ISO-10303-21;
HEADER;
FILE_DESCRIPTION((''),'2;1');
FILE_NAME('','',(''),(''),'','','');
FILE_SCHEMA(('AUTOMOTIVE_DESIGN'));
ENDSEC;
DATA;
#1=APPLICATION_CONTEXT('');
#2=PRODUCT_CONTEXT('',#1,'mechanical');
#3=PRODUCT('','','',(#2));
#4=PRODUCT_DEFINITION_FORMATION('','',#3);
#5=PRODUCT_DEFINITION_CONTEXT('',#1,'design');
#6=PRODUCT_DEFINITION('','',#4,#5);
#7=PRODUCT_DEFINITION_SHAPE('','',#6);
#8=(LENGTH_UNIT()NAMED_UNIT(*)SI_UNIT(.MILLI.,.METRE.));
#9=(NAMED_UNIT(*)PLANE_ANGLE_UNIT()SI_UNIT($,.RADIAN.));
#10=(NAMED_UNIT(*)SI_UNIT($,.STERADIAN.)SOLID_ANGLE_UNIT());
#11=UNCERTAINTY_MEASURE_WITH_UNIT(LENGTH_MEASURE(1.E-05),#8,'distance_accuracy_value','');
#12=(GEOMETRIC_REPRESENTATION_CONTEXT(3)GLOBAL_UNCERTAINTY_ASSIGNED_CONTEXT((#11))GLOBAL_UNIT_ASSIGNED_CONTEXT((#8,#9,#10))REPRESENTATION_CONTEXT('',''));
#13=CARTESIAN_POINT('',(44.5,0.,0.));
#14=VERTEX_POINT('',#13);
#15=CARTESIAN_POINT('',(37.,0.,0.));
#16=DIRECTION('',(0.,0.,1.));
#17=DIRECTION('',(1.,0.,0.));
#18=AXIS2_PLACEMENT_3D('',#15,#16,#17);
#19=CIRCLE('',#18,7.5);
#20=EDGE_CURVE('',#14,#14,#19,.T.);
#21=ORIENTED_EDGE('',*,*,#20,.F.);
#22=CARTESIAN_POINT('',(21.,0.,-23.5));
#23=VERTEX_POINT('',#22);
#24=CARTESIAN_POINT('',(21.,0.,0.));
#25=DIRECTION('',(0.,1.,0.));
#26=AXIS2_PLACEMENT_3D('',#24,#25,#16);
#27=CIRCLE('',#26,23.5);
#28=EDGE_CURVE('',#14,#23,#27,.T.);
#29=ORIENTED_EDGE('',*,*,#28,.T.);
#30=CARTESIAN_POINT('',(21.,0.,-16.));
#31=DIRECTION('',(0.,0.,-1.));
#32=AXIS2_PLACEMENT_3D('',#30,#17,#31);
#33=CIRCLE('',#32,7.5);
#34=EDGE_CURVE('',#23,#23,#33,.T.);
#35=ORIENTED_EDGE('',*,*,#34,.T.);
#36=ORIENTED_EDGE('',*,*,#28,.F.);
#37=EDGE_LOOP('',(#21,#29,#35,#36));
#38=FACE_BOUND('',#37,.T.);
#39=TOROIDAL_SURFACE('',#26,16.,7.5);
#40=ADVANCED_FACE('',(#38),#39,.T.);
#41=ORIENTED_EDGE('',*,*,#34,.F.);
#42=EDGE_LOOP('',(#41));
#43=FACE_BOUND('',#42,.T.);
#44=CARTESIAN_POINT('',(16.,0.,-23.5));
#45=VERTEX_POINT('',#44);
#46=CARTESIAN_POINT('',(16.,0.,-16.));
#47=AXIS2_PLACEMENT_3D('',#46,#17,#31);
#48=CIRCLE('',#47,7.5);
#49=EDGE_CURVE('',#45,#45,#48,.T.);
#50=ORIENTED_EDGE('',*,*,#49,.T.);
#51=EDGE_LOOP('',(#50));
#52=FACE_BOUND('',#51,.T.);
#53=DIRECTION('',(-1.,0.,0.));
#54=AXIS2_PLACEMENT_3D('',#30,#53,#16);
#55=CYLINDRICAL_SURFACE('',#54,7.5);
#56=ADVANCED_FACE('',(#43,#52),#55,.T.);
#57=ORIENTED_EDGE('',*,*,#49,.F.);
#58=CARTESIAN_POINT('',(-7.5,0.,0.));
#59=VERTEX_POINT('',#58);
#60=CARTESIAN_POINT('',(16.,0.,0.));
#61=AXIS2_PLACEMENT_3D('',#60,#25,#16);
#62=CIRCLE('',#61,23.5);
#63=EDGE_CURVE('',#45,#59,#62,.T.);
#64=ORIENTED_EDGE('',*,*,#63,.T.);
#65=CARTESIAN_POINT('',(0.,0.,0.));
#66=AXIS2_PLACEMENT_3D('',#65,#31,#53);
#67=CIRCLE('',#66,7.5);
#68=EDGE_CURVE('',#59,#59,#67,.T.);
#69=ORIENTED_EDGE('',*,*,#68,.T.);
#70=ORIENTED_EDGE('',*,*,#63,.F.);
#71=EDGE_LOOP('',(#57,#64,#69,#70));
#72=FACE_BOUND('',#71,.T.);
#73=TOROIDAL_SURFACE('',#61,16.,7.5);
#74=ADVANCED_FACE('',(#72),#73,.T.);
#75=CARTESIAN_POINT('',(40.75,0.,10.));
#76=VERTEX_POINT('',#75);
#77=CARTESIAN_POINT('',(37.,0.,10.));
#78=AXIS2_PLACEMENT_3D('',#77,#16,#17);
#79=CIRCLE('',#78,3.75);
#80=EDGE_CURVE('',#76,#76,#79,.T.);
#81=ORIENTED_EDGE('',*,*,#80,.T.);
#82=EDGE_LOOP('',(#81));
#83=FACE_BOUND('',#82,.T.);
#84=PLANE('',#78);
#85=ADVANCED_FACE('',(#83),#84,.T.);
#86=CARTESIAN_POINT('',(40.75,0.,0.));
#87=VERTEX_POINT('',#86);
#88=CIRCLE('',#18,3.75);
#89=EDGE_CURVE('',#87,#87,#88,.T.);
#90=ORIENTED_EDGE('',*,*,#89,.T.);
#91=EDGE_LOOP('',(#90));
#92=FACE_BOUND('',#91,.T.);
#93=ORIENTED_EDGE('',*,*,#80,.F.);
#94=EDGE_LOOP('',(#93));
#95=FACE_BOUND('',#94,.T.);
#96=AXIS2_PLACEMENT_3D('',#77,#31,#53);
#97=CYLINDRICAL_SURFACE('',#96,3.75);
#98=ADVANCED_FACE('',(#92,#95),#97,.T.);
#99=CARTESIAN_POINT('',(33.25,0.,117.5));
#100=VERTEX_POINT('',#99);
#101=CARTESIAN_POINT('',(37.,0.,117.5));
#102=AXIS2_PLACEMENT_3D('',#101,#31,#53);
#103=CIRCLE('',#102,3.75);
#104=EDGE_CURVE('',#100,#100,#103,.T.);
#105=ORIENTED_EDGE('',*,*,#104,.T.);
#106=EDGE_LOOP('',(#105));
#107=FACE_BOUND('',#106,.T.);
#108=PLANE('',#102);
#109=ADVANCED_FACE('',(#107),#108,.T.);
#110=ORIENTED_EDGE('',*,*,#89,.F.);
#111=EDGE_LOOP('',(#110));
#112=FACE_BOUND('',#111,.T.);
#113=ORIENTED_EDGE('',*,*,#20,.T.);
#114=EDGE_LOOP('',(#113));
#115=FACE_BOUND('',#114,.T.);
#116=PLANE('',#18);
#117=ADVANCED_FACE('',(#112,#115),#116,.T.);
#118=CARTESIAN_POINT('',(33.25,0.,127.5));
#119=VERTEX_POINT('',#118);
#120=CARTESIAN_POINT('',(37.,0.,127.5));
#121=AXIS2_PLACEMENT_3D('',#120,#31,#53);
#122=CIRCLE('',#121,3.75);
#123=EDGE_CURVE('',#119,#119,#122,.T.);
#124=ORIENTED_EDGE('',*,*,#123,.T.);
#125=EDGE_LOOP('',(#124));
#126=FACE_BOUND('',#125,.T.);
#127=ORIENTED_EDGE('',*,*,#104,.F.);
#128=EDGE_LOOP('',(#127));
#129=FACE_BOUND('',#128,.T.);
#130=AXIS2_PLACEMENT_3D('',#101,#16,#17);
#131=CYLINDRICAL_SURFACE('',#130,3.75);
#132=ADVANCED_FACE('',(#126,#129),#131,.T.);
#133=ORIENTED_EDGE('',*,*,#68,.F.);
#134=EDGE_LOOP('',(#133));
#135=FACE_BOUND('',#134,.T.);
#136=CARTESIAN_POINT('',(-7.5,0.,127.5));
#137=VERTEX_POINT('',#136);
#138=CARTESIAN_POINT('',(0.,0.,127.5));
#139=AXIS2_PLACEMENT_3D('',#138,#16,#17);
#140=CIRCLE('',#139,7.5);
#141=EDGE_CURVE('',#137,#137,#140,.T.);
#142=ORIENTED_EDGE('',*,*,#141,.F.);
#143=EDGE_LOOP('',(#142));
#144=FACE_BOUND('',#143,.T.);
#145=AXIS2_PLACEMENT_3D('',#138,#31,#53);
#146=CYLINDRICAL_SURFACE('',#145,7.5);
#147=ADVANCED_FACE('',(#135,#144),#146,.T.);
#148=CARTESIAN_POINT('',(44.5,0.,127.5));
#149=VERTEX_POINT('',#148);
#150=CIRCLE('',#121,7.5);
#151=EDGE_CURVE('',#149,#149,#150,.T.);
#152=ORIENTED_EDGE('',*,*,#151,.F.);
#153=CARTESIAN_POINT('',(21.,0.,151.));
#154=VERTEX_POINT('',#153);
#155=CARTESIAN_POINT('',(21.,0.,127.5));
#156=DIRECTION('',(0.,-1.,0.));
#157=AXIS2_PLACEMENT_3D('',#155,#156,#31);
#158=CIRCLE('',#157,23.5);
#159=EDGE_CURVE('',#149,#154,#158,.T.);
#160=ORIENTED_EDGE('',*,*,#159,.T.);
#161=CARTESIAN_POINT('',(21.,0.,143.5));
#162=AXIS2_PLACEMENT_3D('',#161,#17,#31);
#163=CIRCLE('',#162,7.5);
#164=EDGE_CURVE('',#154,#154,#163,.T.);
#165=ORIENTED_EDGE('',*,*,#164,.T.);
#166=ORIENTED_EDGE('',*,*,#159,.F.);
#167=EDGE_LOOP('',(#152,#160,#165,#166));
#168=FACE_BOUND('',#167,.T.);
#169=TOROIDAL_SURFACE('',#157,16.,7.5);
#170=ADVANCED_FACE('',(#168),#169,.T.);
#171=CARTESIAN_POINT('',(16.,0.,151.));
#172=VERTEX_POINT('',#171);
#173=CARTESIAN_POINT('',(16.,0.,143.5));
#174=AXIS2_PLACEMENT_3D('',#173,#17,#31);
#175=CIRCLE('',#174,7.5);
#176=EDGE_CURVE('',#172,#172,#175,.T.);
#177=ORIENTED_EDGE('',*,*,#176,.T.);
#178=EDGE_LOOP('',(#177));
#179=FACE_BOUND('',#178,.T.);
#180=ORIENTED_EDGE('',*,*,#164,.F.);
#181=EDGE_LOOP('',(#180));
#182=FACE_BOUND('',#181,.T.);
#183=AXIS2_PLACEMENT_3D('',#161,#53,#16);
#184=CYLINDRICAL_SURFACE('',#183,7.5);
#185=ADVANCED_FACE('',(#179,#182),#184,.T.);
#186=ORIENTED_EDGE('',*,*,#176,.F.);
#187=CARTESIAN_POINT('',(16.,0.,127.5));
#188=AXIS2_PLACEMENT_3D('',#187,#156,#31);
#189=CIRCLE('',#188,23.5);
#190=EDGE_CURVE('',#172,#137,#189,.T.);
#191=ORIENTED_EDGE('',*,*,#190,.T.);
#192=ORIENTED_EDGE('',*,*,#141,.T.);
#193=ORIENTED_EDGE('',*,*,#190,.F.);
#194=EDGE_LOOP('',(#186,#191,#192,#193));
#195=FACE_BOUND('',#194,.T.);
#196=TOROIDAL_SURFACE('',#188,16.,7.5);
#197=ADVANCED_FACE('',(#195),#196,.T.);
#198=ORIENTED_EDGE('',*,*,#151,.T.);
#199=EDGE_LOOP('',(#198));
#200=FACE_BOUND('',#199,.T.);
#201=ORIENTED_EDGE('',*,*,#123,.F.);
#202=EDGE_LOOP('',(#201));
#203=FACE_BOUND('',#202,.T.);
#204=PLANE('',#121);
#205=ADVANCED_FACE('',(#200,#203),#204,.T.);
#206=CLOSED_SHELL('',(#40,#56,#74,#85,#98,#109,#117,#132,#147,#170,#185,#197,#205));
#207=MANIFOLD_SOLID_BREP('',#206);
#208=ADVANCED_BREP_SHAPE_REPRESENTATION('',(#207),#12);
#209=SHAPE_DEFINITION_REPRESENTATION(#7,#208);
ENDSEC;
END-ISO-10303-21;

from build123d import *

# Parameters (mm, degrees)
SKETCH_2_R          = 7.5
EXTRUDE_1_DEPTH     = 127.5
SKETCH_3_R          = 7.5
REVOLVE_1_ANGLE     = 90
REVOLVE_2_OUTLINE_R = 7.5
REVOLVE_2_ANGLE     = 90
SKETCH_19_R         = 7.5
EXTRUDE_2_DEPTH     = 5
SKETCH_21_R         = 7.5
EXTRUDE_3_DEPTH     = 5
SKETCH_22_R         = 7.5
REVOLVE_3_ANGLE     = 90
SKETCH_23_R         = 7.5
REVOLVE_4_ANGLE     = 90
SKETCH_25_R         = 3.75
EXTRUDE_4_DEPTH     = 10
EXTRUDE_START       = 10
SKETCH_26_R         = 3.75
EXTRUDE_5_DEPTH     = 10


# Read off the part's stored shape, not the designer's step: Повернуть2
with BuildPart() as part:
    # Эскиз2 → Бобышка-Вытянуть1 (new body)
    with BuildSketch(Plane.XY):
        Circle(SKETCH_2_R)
    extrude(amount=EXTRUDE_1_DEPTH)

    # Эскиз3 → Повернуть1 (revolve)
    with BuildSketch(Plane.XY.offset(127.5)):
        with Locations(Location((0, 0, 0), (0, 0, 180))):
            Circle(SKETCH_3_R)
    revolve(axis=Axis((16, 0, 127.5), (0, 1, 0)), revolution_arc=REVOLVE_1_ANGLE)

    # Повернуть2 outline → Повернуть2 (revolve)
    with BuildSketch(Plane(origin=(16, 0, 0), x_dir=(0, 0, -1), z_dir=(1, 0, 0))):
        with Locations((16, 0)):
            Circle(REVOLVE_2_OUTLINE_R)
    revolve(axis=Axis((16, 0, 0), (0, 1, 0)), revolution_arc=REVOLVE_2_ANGLE)

    # Эскиз19 → Бобышка-Вытянуть2 (add)
    with BuildSketch(Plane(origin=(16, 0, 0), x_dir=(0, 0, -1), z_dir=(1, 0, 0))):
        with Locations((16, 0)):
            Circle(SKETCH_19_R)
    extrude(amount=EXTRUDE_2_DEPTH)

    # Эскиз21 → Бобышка-Вытянуть3 (add)
    with BuildSketch(Plane(origin=(16, 0, 0), x_dir=(0, 0, -1), z_dir=(1, 0, 0))):
        with Locations(Location((-143.5, 0, 0), (0, 0, 180))):
            Circle(SKETCH_21_R)
    extrude(amount=EXTRUDE_3_DEPTH)

    # Эскиз22 → Повернуть3 (revolve)
    with BuildSketch(Plane(origin=(21, 0, 0), x_dir=(0, 0, -1), z_dir=(1, 0, 0))):
        with Locations((16, 0)):
            Circle(SKETCH_22_R)
    revolve(axis=Axis((21, 0, 0), (0, -1, 0)), revolution_arc=REVOLVE_3_ANGLE)

    # Эскиз23 → Повернуть4 (revolve)
    with BuildSketch(Plane(origin=(21, 0, 0), x_dir=(0, 0, -1), z_dir=(1, 0, 0))):
        with Locations(Location((-143.5, 0, 0), (0, 0, 180))):
            Circle(SKETCH_23_R)
    revolve(axis=Axis((21, 0, 127.5), (0, 1, 0)), revolution_arc=REVOLVE_4_ANGLE)

    # Эскиз25 → Бобышка-Вытянуть4 (add)
    with BuildSketch(Plane.XY):
        with Locations((37, 0)):
            Circle(SKETCH_25_R)
    extrude(amount=EXTRUDE_4_DEPTH)

    # Эскиз26 → Бобышка-Вытянуть5 (add)
    with BuildSketch(Plane(origin=(0, 0, 127.5), x_dir=(-1, 0, 0), z_dir=(0, 0, -1)).offset(EXTRUDE_START)):
        with Locations(Location((-37, 0, 0), (0, 0, 180))):
            Circle(SKETCH_26_R)
    extrude(amount=-EXTRUDE_5_DEPTH)


solid = part.part
